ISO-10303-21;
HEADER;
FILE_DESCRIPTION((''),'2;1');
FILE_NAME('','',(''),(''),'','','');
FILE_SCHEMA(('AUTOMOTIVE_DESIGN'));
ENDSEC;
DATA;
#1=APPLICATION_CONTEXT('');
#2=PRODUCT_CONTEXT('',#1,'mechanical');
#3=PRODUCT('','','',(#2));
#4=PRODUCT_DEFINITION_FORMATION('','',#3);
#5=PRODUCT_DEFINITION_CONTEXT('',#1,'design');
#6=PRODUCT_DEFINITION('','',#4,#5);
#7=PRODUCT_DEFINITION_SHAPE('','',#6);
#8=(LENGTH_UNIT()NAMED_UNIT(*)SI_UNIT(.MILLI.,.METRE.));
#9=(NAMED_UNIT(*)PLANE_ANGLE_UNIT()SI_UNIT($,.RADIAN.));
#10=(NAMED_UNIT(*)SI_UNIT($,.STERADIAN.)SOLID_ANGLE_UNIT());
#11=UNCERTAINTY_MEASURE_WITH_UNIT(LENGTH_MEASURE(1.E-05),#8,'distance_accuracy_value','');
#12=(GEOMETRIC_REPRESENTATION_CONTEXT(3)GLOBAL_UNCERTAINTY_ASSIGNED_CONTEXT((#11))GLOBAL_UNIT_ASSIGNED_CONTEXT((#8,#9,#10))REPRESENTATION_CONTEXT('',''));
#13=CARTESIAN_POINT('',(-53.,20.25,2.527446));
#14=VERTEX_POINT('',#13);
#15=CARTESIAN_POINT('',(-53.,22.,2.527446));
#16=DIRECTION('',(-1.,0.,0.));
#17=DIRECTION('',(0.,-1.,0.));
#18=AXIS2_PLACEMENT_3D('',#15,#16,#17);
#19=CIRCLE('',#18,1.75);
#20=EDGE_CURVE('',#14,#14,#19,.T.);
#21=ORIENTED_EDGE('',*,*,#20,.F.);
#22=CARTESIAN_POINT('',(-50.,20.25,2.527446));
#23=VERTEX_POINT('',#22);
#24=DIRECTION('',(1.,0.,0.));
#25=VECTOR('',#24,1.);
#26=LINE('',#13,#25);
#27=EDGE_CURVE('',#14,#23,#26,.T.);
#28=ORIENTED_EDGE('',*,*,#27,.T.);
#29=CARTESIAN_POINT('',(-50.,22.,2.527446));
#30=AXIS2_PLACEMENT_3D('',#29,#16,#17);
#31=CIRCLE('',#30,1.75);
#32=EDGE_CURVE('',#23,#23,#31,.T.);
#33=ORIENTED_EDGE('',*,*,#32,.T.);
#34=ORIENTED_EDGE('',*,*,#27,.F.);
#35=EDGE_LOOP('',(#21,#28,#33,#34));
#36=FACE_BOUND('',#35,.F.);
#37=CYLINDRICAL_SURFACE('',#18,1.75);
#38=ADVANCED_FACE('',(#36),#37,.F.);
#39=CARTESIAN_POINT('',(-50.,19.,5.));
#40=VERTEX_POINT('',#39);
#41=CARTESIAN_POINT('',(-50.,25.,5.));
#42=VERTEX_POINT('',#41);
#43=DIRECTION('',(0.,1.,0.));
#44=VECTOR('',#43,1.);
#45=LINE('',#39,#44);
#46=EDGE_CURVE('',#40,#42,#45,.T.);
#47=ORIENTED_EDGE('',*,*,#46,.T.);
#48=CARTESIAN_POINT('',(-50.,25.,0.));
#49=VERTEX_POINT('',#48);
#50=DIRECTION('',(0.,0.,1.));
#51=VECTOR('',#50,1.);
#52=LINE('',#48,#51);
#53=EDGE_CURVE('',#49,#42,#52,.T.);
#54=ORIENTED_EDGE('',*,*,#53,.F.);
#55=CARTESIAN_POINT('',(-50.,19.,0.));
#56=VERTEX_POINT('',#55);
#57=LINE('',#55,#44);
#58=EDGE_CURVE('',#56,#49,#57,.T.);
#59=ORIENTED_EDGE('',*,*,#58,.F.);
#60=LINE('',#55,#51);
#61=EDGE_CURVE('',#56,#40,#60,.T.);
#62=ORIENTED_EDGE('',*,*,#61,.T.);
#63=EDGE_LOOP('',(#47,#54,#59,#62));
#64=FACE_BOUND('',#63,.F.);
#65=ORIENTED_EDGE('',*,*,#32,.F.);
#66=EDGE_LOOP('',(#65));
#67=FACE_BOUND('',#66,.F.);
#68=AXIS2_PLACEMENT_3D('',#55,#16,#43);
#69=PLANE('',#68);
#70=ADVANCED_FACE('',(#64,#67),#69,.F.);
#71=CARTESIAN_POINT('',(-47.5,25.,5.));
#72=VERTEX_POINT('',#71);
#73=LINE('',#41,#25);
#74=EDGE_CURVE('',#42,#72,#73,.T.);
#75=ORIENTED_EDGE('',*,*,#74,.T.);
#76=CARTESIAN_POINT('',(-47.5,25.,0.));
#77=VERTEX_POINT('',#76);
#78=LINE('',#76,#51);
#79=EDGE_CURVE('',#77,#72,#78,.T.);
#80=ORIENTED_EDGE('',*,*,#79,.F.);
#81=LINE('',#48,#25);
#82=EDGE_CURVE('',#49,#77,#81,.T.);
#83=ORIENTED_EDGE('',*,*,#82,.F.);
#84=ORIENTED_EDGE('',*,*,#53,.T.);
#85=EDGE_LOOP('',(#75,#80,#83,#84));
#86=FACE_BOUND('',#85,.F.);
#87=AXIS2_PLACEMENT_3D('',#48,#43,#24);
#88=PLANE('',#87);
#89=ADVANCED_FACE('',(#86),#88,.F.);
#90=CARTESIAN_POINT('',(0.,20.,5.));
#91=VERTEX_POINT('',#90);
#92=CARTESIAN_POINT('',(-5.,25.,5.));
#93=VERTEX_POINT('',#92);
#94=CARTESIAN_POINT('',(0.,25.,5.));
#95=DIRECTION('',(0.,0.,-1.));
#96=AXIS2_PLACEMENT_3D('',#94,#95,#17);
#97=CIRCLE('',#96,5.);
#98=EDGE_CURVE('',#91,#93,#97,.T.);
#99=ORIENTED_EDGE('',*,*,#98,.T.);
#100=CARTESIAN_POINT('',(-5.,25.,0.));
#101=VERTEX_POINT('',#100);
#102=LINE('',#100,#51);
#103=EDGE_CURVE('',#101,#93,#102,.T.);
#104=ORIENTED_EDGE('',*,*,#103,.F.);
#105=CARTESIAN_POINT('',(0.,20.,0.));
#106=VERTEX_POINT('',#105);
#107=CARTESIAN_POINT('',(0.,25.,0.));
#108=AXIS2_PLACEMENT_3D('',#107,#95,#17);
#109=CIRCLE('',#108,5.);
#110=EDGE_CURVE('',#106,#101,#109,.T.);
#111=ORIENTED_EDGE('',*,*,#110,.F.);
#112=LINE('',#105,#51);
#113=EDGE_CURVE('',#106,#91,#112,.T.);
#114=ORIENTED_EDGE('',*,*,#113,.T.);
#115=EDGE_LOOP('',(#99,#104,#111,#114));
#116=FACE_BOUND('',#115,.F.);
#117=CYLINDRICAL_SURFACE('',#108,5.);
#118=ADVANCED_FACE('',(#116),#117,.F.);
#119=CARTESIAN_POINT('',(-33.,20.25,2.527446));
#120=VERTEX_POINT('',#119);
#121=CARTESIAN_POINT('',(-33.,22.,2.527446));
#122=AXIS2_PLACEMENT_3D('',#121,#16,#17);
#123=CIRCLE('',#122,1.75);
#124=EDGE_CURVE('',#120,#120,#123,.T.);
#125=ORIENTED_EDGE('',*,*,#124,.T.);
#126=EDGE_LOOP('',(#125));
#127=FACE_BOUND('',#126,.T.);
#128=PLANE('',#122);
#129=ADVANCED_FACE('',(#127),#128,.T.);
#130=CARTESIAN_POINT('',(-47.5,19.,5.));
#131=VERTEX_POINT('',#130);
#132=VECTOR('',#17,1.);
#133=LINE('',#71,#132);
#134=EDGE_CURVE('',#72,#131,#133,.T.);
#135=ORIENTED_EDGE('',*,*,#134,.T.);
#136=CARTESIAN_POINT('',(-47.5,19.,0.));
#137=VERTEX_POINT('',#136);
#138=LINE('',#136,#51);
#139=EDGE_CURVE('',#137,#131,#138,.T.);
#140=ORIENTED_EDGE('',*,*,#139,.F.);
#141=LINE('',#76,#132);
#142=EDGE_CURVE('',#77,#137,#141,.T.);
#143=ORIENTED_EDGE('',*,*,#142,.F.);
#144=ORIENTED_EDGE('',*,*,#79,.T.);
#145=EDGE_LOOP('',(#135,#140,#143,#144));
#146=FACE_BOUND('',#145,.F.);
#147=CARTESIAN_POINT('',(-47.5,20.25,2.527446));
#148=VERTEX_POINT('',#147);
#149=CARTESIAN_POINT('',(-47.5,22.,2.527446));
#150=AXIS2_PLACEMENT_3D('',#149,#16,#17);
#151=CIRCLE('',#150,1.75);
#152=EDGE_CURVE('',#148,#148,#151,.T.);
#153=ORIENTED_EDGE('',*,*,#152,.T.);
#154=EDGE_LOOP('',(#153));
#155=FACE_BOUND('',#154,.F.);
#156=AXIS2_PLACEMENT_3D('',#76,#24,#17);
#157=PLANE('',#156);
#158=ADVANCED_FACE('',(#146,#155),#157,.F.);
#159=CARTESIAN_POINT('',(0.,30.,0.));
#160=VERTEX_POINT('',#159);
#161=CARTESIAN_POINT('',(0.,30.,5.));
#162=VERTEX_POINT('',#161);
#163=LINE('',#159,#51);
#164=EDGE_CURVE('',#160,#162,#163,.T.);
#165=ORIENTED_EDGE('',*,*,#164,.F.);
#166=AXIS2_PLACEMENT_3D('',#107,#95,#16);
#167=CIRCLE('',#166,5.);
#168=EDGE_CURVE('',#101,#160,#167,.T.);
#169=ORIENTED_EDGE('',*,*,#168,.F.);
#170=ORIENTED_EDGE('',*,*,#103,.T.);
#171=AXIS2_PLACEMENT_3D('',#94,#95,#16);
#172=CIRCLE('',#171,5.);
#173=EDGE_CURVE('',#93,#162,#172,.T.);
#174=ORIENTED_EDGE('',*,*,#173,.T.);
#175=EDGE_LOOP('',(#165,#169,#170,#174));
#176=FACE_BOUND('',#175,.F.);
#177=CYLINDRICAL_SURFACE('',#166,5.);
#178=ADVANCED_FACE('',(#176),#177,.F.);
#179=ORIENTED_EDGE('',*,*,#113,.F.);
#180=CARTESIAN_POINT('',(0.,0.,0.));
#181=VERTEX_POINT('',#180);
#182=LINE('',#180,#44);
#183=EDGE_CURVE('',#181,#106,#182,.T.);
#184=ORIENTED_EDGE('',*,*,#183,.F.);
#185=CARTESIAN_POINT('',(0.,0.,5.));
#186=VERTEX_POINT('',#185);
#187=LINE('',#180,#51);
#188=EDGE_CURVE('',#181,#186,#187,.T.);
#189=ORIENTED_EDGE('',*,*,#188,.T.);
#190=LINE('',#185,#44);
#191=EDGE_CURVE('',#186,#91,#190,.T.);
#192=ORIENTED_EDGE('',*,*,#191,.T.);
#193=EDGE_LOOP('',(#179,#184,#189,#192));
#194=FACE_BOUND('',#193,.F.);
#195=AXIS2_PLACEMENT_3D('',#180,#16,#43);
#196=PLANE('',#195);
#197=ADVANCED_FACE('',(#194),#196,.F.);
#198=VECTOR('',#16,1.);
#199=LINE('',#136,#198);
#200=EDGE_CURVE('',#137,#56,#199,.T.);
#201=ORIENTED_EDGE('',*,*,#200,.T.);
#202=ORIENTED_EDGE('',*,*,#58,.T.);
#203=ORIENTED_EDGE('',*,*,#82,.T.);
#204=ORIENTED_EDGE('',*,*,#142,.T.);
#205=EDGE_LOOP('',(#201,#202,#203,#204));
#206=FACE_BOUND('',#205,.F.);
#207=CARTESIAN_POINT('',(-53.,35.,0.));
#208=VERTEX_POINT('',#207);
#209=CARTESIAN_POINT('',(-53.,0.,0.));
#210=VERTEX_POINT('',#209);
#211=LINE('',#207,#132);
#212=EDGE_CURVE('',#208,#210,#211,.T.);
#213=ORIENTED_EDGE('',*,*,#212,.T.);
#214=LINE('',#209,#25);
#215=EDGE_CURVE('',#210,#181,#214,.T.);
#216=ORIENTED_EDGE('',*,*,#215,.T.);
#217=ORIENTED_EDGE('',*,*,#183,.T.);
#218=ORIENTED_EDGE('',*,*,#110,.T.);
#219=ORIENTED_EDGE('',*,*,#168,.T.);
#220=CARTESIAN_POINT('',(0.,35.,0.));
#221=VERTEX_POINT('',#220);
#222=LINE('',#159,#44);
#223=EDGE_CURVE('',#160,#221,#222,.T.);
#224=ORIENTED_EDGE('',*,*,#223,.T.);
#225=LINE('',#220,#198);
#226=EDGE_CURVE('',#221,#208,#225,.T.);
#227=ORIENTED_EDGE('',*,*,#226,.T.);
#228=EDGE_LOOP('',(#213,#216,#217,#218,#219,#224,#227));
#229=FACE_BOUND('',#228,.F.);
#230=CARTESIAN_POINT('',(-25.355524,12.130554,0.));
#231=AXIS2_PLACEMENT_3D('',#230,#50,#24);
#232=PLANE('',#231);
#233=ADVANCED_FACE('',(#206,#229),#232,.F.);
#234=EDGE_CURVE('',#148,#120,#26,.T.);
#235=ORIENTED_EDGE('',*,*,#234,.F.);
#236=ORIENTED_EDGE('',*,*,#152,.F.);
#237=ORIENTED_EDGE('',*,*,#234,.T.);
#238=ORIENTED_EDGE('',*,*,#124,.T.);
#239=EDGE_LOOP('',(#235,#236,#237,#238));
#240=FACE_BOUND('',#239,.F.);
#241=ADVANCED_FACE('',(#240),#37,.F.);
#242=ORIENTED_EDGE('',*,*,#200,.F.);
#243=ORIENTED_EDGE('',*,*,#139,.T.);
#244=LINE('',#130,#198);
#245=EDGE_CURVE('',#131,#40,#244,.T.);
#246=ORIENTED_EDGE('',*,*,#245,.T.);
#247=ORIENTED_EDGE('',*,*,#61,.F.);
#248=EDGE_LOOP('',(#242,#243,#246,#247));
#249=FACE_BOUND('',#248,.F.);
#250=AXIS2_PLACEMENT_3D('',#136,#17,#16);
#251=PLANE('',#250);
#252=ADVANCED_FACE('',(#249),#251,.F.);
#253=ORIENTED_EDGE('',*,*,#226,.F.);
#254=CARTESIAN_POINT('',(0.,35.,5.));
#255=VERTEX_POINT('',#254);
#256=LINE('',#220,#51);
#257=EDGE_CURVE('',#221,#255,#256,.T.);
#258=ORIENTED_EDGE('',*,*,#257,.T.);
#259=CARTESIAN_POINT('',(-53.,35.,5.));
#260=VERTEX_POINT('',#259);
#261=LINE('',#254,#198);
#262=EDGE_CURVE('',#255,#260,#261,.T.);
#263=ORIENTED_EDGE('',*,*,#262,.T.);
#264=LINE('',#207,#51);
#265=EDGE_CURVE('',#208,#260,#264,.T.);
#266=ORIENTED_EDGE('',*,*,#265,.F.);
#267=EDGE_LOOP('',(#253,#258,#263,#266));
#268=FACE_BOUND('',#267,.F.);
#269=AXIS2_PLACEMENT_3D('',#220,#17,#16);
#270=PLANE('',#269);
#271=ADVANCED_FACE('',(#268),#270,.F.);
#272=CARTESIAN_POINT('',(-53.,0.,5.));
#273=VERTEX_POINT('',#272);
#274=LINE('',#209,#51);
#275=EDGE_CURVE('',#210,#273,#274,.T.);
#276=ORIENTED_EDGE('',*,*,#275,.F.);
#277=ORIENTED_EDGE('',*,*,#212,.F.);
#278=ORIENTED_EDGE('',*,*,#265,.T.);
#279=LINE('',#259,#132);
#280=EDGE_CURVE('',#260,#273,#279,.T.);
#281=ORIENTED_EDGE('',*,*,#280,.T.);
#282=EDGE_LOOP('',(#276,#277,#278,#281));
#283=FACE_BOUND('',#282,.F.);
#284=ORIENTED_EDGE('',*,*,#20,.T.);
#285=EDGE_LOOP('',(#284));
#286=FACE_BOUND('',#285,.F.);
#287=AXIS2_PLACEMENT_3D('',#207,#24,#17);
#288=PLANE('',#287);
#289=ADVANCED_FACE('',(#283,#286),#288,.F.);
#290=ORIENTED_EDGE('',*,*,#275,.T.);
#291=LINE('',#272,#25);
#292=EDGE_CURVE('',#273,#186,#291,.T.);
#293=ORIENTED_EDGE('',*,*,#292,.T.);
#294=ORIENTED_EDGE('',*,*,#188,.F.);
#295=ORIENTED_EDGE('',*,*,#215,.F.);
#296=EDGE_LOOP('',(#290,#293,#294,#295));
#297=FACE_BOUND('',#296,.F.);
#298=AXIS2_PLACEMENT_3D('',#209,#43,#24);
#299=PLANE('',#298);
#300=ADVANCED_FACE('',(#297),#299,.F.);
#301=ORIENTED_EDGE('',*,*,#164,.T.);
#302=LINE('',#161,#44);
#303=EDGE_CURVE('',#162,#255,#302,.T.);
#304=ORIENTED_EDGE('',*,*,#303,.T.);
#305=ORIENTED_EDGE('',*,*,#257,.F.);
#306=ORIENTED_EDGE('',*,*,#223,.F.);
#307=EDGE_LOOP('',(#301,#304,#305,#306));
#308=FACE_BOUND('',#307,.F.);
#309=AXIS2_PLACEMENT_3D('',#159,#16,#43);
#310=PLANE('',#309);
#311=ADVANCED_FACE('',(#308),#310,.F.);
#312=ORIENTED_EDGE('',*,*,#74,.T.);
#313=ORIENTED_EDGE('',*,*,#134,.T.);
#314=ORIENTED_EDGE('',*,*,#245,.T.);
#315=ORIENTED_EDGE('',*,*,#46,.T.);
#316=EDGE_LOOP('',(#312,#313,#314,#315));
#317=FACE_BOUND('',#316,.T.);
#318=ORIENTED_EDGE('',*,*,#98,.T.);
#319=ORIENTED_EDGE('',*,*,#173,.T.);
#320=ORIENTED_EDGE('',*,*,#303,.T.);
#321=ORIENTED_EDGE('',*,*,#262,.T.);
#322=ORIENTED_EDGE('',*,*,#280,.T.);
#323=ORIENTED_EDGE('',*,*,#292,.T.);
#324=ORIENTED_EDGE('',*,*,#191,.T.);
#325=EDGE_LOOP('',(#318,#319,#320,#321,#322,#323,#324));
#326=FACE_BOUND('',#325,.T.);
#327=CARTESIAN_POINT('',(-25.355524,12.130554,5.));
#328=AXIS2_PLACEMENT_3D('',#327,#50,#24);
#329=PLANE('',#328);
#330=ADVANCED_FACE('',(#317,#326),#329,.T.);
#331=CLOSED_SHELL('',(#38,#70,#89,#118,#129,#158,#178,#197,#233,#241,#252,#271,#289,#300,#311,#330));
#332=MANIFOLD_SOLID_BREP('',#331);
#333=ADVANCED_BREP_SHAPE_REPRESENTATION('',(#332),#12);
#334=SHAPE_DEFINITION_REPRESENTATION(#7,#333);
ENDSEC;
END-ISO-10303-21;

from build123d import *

# Parameters (mm, degrees)
F0_W     = 3
F0_H     = 10
F0_H_2   = 3
F1_DEPTH = 5
F2_R     = 1.75
F3_DEPTH = 20
F4_DEPTH = 20


# Not quite as in the source:
# - a feature names something its author has since deleted; it is built from what else it names


with BuildPart() as f1:
    # F0 (on Top) → F1 (new body)
    with BuildSketch(Plane.XY):
        with BuildLine():
            Line((-5, 25), (-47.5, 25))
            Line((-47.5, 25), (-47.5, 22))
            Line((-47.5, 22), (-47.5, 19))
            Line((-47.5, 19), (-50, 19))
            Line((-50, 19), (-50, 0))
            Line((-50, 0), (0, 0))
            Line((0, 0), (0, 20))
            ThreePointArc((0, 20), (-3.5355339059, 21.4644660941), (-5, 25))
        make_face()
        Polygon((-50, 22), (-53, 22), (-53, 0), (-50, 0), (-50, 19), align=None)
        with Locations((-51.5, 30)):
            Rectangle(F0_W, F0_H)
        with Locations((-51.5, 23.5)):
            Rectangle(F0_W, F0_H_2)
        with BuildLine():
            Line((0, 35), (-50, 35))
            Line((-50, 35), (-50, 25))
            Line((-50, 25), (-47.5, 25))
            Line((-47.5, 25), (-5, 25))
            ThreePointArc((-5, 25), (-3.5355339059, 28.5355339059), (0, 30))
            Line((0, 30), (0, 35))
        make_face()
    extrude(amount=F1_DEPTH)

    # F2 (on face) → F3 (cut)
    with BuildSketch(Plane(origin=(-53, 0, 0), x_dir=(0, -1, 0), z_dir=(-1, 0, 0))):
        with Locations((-22, 2.5274456161)):
            Circle(F2_R)
    extrude(amount=-F3_DEPTH, mode=Mode.SUBTRACT)

    # F2 (on face) → F4 (cut)
    with BuildSketch(Plane(origin=(-53, 0, 0), x_dir=(0, -1, 0), z_dir=(-1, 0, 0))):
        with BuildLine():
            ThreePointArc((22, 4.2774456161), (20.25, 2.5274456161), (22, 0.7774456161))
            Line((22, 0.7774456161), (22, 2.5274456161))
            Line((22, 2.5274456161), (22, 4.2774456161))
        make_face()
        with BuildLine():
            ThreePointArc((22, 0.7774456161), (23.2361299407, 1.2887032015), (23.7499961, 2.5237510221))
            Line((23.7499961, 2.5237510221), (22, 2.5274456161))
            Line((22, 2.5274456161), (22, 0.7774456161))
        make_face()
        with BuildLine():
            Line((22, 2.5274456161), (23.7499961, 2.5237510221))
            ThreePointArc((23.7499961, 2.5237510221), (23.749999025, 2.5255983181), (23.75, 2.5274456161))
            ThreePointArc((23.75, 2.5274456161), (23.2374368671, 3.7648824831), (22, 4.2774456161))
            Line((22, 4.2774456161), (22, 2.5274456161))
        make_face()
    extrude(amount=-F4_DEPTH, mode=Mode.SUBTRACT)


solid = f1.part
